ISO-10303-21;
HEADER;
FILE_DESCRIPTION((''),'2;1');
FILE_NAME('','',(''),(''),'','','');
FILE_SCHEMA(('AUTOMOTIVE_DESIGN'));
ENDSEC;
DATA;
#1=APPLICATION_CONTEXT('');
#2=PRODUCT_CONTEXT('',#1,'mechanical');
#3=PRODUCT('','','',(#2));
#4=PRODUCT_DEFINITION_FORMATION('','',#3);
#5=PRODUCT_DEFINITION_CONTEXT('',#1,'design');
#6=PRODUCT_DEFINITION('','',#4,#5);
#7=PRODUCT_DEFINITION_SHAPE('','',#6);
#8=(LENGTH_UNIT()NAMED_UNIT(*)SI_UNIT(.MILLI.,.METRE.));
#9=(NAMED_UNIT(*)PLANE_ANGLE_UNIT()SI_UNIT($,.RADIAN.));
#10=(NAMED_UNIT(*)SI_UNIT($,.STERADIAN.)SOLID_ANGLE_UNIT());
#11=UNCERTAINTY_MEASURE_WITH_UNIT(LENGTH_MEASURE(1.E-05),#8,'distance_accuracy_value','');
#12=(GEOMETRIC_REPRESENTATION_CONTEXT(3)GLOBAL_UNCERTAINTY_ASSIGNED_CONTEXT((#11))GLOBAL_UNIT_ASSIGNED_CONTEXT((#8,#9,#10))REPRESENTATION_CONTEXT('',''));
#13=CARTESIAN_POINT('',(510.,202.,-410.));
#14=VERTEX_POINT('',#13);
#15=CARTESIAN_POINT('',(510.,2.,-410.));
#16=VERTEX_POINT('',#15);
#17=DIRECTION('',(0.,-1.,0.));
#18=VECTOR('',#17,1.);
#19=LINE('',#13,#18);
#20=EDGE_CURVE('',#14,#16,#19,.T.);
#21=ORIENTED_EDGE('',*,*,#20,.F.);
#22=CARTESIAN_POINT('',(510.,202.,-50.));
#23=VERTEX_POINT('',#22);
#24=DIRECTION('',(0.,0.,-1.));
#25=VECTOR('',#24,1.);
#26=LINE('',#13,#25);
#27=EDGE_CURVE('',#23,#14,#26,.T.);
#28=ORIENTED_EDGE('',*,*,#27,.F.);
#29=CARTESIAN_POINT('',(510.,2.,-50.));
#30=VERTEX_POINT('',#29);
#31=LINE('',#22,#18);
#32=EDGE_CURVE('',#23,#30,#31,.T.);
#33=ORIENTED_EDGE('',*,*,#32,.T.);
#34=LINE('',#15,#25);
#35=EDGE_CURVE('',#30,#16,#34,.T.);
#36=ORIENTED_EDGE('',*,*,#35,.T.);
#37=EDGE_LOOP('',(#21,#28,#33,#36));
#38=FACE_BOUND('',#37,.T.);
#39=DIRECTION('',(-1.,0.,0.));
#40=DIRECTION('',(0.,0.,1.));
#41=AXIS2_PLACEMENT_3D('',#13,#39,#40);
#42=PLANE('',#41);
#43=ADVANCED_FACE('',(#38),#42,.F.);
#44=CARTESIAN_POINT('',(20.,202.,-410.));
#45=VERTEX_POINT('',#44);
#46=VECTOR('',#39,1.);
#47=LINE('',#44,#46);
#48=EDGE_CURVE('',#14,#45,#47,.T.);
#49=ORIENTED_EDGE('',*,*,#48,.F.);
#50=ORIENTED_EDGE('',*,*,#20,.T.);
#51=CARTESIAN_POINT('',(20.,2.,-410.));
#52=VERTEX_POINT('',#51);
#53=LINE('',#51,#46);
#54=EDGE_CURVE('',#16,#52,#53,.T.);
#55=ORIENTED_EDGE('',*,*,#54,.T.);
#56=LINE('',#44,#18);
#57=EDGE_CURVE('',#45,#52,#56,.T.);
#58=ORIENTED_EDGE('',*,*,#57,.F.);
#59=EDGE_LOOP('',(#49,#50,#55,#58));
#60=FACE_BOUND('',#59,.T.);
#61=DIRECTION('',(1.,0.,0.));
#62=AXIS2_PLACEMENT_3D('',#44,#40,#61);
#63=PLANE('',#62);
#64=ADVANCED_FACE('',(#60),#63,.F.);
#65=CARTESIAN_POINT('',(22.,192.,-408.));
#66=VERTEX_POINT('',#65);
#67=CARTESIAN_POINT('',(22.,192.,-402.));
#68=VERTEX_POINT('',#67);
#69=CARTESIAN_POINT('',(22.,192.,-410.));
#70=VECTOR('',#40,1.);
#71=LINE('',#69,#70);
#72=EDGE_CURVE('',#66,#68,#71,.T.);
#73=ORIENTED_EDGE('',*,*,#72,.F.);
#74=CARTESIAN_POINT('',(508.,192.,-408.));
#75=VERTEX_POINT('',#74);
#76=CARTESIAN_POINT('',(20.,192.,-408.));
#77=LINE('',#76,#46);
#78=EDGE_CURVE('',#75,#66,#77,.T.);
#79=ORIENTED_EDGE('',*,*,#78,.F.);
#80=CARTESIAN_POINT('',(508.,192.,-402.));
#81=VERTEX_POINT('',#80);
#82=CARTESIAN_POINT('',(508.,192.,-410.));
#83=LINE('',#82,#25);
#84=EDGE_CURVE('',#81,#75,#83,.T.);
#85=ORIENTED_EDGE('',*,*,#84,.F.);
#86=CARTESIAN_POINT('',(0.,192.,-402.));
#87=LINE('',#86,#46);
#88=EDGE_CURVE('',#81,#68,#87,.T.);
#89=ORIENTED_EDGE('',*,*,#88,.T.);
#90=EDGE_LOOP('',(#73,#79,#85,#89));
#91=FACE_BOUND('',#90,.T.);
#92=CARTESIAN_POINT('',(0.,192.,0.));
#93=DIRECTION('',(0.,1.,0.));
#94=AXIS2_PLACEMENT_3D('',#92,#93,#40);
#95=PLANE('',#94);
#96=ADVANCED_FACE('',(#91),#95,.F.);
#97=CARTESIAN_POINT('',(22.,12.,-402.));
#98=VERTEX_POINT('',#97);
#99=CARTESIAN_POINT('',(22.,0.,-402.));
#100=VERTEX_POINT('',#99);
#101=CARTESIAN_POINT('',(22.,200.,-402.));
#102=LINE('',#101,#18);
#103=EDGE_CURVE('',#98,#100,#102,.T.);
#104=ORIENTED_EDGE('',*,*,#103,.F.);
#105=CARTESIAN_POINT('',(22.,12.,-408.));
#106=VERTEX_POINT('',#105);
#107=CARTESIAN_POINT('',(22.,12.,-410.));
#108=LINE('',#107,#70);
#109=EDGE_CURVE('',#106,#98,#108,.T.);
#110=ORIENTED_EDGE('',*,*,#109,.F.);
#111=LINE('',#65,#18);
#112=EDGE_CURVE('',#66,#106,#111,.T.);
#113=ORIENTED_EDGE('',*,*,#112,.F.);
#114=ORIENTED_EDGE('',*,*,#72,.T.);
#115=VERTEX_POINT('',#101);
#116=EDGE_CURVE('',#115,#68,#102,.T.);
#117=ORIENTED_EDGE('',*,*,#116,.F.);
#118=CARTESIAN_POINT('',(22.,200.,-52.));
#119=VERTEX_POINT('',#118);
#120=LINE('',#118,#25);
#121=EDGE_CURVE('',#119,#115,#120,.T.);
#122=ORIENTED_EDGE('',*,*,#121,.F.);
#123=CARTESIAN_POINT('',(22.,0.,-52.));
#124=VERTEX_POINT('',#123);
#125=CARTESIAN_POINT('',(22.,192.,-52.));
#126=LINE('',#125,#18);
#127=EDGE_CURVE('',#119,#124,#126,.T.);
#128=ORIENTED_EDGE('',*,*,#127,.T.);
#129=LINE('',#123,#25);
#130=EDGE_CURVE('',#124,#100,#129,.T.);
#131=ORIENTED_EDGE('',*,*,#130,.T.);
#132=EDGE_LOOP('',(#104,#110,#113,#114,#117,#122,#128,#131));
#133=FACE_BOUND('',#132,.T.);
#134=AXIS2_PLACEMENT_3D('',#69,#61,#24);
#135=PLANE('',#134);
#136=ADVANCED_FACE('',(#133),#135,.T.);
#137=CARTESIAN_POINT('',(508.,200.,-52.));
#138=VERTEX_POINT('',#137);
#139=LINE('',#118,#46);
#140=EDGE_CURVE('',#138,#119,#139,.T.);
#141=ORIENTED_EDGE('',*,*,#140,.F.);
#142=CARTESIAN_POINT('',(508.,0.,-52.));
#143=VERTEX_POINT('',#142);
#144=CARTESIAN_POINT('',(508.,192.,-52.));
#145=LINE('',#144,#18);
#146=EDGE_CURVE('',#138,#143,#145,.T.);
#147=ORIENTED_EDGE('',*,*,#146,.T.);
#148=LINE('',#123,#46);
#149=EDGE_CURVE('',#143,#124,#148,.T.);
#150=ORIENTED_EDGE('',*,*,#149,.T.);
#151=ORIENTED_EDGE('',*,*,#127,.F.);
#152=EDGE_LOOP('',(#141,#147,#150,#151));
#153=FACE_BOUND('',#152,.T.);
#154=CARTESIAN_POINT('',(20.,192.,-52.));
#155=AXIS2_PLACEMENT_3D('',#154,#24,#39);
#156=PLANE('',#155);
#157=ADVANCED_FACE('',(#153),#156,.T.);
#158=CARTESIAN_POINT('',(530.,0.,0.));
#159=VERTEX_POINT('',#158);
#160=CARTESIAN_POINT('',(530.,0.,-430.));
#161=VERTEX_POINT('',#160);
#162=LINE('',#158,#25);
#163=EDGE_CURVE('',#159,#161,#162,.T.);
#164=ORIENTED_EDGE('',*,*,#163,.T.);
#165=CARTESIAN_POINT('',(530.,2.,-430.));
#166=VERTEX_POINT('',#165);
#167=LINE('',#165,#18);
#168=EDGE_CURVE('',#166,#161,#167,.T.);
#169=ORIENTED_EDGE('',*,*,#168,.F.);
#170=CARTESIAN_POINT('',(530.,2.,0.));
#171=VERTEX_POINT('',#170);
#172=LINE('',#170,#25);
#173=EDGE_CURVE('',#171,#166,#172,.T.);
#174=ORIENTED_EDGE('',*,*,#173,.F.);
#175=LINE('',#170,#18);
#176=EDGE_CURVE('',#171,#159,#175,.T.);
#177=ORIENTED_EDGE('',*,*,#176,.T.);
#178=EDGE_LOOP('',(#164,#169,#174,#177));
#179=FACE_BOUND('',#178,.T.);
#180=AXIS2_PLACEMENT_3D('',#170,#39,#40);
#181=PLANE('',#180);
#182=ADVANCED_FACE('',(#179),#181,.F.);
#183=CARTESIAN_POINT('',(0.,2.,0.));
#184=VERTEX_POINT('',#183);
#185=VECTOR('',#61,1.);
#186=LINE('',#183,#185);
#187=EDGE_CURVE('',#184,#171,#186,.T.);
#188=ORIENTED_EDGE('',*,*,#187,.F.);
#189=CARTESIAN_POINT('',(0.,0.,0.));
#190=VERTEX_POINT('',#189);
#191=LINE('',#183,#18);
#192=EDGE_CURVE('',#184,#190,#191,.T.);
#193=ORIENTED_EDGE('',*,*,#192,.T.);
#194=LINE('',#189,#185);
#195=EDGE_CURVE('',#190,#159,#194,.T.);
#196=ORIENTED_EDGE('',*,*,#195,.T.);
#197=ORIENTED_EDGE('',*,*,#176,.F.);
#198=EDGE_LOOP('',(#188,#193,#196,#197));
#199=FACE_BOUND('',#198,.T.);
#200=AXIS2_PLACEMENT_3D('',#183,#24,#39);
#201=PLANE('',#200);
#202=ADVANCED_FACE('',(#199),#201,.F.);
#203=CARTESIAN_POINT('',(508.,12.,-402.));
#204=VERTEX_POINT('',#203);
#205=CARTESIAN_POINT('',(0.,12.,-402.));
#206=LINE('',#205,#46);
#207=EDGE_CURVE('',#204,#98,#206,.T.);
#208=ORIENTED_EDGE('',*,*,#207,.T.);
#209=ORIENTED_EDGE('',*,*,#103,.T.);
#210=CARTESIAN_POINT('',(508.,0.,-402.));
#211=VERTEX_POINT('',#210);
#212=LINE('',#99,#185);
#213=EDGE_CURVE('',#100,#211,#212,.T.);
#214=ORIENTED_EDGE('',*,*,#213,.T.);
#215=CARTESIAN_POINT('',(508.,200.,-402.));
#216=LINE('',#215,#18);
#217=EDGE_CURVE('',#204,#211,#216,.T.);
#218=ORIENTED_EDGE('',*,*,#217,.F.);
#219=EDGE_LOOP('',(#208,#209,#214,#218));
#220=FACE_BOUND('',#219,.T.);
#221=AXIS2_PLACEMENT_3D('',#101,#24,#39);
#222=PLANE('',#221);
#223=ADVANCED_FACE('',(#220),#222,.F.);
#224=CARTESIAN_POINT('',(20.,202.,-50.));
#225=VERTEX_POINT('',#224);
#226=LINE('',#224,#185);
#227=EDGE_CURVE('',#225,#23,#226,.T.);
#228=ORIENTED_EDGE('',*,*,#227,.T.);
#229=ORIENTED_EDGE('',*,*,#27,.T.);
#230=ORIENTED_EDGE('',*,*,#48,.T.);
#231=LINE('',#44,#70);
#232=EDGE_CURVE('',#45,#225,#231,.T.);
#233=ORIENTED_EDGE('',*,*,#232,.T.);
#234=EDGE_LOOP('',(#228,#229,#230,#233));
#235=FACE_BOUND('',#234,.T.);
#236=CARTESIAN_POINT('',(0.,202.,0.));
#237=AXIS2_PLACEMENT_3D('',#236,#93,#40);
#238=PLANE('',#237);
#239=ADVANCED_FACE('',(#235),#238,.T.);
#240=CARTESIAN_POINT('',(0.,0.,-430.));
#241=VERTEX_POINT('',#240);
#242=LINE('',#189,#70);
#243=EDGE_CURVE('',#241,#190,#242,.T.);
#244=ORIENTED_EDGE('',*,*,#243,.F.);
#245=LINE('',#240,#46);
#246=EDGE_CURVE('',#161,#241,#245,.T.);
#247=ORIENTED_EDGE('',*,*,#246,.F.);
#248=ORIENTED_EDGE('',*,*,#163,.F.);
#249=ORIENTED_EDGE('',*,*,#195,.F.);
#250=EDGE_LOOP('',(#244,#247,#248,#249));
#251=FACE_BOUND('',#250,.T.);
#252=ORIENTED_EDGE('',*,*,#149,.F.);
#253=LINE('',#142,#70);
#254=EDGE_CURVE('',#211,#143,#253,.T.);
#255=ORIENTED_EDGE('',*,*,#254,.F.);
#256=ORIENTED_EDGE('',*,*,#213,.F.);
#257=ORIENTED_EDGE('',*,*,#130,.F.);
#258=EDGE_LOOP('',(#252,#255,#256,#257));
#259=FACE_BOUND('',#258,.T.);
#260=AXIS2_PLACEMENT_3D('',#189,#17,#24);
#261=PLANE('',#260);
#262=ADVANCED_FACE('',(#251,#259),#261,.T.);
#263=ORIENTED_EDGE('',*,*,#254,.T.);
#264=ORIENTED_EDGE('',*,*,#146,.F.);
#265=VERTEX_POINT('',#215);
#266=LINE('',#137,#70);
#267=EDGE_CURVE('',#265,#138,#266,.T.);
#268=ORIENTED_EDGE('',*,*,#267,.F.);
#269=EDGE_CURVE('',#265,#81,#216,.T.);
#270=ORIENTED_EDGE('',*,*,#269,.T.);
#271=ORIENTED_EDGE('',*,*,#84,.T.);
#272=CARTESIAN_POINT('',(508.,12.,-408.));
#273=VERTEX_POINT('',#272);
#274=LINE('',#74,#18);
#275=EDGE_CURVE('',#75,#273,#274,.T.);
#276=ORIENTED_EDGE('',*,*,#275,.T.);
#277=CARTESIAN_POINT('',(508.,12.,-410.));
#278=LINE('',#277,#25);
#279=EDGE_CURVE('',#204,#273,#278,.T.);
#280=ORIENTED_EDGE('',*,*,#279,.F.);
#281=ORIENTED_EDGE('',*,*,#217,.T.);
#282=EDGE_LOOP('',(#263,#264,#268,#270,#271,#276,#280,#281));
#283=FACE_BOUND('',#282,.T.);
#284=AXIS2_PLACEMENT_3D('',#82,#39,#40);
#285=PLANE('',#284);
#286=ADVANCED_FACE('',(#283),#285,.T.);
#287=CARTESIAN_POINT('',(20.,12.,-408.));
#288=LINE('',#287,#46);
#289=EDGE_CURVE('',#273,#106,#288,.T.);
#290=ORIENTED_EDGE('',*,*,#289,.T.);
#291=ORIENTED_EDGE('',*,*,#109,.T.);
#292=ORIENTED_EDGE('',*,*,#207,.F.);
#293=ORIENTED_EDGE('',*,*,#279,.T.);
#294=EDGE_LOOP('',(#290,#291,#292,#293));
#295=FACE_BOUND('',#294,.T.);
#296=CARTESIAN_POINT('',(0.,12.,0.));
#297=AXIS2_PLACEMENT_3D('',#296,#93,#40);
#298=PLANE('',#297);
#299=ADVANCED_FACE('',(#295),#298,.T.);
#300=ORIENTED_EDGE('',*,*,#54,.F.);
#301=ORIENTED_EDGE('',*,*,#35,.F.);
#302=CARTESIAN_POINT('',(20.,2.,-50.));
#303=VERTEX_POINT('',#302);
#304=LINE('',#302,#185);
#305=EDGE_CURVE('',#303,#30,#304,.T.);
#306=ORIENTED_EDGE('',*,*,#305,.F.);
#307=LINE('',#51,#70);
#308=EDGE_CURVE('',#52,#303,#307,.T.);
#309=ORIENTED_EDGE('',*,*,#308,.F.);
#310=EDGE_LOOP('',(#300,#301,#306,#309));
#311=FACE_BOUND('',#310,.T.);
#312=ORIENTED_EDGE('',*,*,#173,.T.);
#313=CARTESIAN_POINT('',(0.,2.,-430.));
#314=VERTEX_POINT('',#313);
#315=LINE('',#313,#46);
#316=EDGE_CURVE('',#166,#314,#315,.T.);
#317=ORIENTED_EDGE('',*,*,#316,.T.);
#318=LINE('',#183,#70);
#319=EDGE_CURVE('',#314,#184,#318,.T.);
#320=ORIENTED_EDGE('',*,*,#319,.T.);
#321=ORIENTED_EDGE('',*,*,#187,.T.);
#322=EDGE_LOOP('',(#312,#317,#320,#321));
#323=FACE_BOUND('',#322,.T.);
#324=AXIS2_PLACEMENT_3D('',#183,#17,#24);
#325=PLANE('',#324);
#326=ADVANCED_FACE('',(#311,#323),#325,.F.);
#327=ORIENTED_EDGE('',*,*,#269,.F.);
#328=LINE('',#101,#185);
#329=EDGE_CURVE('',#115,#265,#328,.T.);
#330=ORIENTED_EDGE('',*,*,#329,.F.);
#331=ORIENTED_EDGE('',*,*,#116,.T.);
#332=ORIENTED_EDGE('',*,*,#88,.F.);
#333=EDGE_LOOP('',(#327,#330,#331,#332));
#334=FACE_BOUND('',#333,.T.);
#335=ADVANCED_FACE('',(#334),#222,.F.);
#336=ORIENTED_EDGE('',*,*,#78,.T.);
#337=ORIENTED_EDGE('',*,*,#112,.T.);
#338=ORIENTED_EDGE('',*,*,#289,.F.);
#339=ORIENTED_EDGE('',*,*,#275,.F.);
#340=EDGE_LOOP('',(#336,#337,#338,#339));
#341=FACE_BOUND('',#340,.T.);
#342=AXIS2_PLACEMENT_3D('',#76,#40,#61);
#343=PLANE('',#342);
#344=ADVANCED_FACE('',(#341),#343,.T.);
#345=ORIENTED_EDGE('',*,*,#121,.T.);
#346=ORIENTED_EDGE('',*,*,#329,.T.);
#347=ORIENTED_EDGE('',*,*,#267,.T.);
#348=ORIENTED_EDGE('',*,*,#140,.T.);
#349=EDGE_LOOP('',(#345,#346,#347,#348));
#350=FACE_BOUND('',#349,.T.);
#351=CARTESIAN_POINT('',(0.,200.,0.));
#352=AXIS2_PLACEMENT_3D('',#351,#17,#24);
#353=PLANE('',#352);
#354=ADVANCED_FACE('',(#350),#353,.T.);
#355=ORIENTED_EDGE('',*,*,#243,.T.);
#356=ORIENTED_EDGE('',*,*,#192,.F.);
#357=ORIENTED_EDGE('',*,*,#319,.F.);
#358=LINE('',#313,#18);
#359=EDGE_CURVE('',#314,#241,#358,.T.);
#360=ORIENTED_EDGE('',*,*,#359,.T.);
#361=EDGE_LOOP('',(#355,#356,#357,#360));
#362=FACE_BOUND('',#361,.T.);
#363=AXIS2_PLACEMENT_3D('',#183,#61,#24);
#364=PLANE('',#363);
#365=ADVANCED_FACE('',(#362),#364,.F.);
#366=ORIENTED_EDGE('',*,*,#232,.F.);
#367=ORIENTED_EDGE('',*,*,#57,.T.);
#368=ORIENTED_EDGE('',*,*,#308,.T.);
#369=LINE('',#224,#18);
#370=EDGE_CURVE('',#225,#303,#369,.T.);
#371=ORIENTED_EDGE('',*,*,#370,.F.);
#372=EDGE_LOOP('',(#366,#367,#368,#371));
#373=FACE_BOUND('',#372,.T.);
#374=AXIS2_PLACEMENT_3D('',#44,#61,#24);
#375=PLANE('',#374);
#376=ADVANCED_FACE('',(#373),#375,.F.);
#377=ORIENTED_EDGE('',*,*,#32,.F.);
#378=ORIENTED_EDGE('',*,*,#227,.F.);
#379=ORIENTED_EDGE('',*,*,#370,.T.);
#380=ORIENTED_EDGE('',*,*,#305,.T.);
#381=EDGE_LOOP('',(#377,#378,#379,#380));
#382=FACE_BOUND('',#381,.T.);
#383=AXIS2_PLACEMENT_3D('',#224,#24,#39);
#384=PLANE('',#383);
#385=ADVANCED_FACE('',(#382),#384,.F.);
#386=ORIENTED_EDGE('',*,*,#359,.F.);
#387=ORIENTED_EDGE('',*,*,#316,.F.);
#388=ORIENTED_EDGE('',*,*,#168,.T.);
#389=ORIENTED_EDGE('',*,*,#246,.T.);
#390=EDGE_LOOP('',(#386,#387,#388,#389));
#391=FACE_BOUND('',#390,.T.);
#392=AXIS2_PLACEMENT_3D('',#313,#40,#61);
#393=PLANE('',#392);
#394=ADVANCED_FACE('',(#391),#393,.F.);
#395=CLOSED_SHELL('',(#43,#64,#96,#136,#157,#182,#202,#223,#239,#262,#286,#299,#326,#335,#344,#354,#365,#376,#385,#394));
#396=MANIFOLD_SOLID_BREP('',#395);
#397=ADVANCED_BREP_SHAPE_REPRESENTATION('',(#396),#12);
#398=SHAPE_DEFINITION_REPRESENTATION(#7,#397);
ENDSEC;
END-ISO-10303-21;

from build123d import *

# Parameters (mm, degrees)
SKETCH_1_W                = 530
SKETCH_1_H                = 430
EXTRUDE_1_DEPTH           = 2
EXTRUDE_1_2_OUTLINE_W     = 490
EXTRUDE_1_2_OUTLINE_H     = 360
EXTRUDE_1_2_DEPTH         = 10
EXTRUDE_START             = 190
EXTRUDE_1_2_2_OUTLINE_W   = 490
EXTRUDE_1_2_2_OUTLINE_H   = 360
EXTRUDE_1_2_2_DEPTH       = 10
EXTRUDE_START_2           = 10
EXTRUDE_1_2_3_OUTLINE_W   = 490
EXTRUDE_1_2_3_OUTLINE_H   = 360
EXTRUDE_1_2_3_OUTLINE_W_2 = 486
EXTRUDE_1_2_3_OUTLINE_H_2 = 356
EXTRUDE_1_2_3_DEPTH       = 180
SKETCH_3_W                = 486
SKETCH_3_H                = 350
CUT_EXTRUDE_1_DEPTH       = 200


# Read off the part's stored shape, not the designer's step: Вытянуть-Тонкостенный1
with BuildPart() as part:
    # Эскиз1 → Extrude 1 (new body)
    with BuildSketch(Plane(origin=(0, 0, 0), x_dir=(1, 0, 0), z_dir=(0, 1, 0))):
        with Locations((265, 215)):
            Rectangle(SKETCH_1_W, SKETCH_1_H)
    extrude(amount=EXTRUDE_1_DEPTH)

    # Extrude 1 2 outline → Extrude 1 2 (add)
    with BuildSketch(Plane(origin=(0, 2, 0), x_dir=(1, 0, 0), z_dir=(0, 1, 0))):
        with Locations((265, 230)):
            Rectangle(EXTRUDE_1_2_OUTLINE_W, EXTRUDE_1_2_OUTLINE_H)
    extrude(amount=EXTRUDE_1_2_DEPTH)



with BuildPart() as body_2:
    # Extrude 1 2 2 outline → Extrude 1 2 2 (new body)
    with BuildSketch(Plane(origin=(0, 2, 0), x_dir=(1, 0, 0), z_dir=(0, 1, 0)).offset(EXTRUDE_START)):
        with Locations((265, 230)):
            Rectangle(EXTRUDE_1_2_2_OUTLINE_W, EXTRUDE_1_2_2_OUTLINE_H)
    extrude(amount=EXTRUDE_1_2_2_DEPTH)


with BuildPart() as part_1:
    add(part.part)

    add(body_2.part)  # Extrude 1 2 3 merges body 2
    # Extrude 1 2 3 outline → Extrude 1 2 3 (add)
    with BuildSketch(Plane(origin=(0, 2, 0), x_dir=(1, 0, 0), z_dir=(0, 1, 0)).offset(EXTRUDE_START_2)):
        with Locations((265, 230)):
            Rectangle(EXTRUDE_1_2_3_OUTLINE_W, EXTRUDE_1_2_3_OUTLINE_H)
        with Locations((265, 230)):
            Rectangle(EXTRUDE_1_2_3_OUTLINE_W_2, EXTRUDE_1_2_3_OUTLINE_H_2, mode=Mode.SUBTRACT)
    extrude(amount=EXTRUDE_1_2_3_DEPTH)

    # Эскиз3 → Вырез-Вытянуть1 (cut)
    with BuildSketch(Plane.XZ):
        with Locations((265, -227)):
            Rectangle(SKETCH_3_W, SKETCH_3_H)
    extrude(amount=-CUT_EXTRUDE_1_DEPTH, mode=Mode.SUBTRACT)


solid = part_1.part
